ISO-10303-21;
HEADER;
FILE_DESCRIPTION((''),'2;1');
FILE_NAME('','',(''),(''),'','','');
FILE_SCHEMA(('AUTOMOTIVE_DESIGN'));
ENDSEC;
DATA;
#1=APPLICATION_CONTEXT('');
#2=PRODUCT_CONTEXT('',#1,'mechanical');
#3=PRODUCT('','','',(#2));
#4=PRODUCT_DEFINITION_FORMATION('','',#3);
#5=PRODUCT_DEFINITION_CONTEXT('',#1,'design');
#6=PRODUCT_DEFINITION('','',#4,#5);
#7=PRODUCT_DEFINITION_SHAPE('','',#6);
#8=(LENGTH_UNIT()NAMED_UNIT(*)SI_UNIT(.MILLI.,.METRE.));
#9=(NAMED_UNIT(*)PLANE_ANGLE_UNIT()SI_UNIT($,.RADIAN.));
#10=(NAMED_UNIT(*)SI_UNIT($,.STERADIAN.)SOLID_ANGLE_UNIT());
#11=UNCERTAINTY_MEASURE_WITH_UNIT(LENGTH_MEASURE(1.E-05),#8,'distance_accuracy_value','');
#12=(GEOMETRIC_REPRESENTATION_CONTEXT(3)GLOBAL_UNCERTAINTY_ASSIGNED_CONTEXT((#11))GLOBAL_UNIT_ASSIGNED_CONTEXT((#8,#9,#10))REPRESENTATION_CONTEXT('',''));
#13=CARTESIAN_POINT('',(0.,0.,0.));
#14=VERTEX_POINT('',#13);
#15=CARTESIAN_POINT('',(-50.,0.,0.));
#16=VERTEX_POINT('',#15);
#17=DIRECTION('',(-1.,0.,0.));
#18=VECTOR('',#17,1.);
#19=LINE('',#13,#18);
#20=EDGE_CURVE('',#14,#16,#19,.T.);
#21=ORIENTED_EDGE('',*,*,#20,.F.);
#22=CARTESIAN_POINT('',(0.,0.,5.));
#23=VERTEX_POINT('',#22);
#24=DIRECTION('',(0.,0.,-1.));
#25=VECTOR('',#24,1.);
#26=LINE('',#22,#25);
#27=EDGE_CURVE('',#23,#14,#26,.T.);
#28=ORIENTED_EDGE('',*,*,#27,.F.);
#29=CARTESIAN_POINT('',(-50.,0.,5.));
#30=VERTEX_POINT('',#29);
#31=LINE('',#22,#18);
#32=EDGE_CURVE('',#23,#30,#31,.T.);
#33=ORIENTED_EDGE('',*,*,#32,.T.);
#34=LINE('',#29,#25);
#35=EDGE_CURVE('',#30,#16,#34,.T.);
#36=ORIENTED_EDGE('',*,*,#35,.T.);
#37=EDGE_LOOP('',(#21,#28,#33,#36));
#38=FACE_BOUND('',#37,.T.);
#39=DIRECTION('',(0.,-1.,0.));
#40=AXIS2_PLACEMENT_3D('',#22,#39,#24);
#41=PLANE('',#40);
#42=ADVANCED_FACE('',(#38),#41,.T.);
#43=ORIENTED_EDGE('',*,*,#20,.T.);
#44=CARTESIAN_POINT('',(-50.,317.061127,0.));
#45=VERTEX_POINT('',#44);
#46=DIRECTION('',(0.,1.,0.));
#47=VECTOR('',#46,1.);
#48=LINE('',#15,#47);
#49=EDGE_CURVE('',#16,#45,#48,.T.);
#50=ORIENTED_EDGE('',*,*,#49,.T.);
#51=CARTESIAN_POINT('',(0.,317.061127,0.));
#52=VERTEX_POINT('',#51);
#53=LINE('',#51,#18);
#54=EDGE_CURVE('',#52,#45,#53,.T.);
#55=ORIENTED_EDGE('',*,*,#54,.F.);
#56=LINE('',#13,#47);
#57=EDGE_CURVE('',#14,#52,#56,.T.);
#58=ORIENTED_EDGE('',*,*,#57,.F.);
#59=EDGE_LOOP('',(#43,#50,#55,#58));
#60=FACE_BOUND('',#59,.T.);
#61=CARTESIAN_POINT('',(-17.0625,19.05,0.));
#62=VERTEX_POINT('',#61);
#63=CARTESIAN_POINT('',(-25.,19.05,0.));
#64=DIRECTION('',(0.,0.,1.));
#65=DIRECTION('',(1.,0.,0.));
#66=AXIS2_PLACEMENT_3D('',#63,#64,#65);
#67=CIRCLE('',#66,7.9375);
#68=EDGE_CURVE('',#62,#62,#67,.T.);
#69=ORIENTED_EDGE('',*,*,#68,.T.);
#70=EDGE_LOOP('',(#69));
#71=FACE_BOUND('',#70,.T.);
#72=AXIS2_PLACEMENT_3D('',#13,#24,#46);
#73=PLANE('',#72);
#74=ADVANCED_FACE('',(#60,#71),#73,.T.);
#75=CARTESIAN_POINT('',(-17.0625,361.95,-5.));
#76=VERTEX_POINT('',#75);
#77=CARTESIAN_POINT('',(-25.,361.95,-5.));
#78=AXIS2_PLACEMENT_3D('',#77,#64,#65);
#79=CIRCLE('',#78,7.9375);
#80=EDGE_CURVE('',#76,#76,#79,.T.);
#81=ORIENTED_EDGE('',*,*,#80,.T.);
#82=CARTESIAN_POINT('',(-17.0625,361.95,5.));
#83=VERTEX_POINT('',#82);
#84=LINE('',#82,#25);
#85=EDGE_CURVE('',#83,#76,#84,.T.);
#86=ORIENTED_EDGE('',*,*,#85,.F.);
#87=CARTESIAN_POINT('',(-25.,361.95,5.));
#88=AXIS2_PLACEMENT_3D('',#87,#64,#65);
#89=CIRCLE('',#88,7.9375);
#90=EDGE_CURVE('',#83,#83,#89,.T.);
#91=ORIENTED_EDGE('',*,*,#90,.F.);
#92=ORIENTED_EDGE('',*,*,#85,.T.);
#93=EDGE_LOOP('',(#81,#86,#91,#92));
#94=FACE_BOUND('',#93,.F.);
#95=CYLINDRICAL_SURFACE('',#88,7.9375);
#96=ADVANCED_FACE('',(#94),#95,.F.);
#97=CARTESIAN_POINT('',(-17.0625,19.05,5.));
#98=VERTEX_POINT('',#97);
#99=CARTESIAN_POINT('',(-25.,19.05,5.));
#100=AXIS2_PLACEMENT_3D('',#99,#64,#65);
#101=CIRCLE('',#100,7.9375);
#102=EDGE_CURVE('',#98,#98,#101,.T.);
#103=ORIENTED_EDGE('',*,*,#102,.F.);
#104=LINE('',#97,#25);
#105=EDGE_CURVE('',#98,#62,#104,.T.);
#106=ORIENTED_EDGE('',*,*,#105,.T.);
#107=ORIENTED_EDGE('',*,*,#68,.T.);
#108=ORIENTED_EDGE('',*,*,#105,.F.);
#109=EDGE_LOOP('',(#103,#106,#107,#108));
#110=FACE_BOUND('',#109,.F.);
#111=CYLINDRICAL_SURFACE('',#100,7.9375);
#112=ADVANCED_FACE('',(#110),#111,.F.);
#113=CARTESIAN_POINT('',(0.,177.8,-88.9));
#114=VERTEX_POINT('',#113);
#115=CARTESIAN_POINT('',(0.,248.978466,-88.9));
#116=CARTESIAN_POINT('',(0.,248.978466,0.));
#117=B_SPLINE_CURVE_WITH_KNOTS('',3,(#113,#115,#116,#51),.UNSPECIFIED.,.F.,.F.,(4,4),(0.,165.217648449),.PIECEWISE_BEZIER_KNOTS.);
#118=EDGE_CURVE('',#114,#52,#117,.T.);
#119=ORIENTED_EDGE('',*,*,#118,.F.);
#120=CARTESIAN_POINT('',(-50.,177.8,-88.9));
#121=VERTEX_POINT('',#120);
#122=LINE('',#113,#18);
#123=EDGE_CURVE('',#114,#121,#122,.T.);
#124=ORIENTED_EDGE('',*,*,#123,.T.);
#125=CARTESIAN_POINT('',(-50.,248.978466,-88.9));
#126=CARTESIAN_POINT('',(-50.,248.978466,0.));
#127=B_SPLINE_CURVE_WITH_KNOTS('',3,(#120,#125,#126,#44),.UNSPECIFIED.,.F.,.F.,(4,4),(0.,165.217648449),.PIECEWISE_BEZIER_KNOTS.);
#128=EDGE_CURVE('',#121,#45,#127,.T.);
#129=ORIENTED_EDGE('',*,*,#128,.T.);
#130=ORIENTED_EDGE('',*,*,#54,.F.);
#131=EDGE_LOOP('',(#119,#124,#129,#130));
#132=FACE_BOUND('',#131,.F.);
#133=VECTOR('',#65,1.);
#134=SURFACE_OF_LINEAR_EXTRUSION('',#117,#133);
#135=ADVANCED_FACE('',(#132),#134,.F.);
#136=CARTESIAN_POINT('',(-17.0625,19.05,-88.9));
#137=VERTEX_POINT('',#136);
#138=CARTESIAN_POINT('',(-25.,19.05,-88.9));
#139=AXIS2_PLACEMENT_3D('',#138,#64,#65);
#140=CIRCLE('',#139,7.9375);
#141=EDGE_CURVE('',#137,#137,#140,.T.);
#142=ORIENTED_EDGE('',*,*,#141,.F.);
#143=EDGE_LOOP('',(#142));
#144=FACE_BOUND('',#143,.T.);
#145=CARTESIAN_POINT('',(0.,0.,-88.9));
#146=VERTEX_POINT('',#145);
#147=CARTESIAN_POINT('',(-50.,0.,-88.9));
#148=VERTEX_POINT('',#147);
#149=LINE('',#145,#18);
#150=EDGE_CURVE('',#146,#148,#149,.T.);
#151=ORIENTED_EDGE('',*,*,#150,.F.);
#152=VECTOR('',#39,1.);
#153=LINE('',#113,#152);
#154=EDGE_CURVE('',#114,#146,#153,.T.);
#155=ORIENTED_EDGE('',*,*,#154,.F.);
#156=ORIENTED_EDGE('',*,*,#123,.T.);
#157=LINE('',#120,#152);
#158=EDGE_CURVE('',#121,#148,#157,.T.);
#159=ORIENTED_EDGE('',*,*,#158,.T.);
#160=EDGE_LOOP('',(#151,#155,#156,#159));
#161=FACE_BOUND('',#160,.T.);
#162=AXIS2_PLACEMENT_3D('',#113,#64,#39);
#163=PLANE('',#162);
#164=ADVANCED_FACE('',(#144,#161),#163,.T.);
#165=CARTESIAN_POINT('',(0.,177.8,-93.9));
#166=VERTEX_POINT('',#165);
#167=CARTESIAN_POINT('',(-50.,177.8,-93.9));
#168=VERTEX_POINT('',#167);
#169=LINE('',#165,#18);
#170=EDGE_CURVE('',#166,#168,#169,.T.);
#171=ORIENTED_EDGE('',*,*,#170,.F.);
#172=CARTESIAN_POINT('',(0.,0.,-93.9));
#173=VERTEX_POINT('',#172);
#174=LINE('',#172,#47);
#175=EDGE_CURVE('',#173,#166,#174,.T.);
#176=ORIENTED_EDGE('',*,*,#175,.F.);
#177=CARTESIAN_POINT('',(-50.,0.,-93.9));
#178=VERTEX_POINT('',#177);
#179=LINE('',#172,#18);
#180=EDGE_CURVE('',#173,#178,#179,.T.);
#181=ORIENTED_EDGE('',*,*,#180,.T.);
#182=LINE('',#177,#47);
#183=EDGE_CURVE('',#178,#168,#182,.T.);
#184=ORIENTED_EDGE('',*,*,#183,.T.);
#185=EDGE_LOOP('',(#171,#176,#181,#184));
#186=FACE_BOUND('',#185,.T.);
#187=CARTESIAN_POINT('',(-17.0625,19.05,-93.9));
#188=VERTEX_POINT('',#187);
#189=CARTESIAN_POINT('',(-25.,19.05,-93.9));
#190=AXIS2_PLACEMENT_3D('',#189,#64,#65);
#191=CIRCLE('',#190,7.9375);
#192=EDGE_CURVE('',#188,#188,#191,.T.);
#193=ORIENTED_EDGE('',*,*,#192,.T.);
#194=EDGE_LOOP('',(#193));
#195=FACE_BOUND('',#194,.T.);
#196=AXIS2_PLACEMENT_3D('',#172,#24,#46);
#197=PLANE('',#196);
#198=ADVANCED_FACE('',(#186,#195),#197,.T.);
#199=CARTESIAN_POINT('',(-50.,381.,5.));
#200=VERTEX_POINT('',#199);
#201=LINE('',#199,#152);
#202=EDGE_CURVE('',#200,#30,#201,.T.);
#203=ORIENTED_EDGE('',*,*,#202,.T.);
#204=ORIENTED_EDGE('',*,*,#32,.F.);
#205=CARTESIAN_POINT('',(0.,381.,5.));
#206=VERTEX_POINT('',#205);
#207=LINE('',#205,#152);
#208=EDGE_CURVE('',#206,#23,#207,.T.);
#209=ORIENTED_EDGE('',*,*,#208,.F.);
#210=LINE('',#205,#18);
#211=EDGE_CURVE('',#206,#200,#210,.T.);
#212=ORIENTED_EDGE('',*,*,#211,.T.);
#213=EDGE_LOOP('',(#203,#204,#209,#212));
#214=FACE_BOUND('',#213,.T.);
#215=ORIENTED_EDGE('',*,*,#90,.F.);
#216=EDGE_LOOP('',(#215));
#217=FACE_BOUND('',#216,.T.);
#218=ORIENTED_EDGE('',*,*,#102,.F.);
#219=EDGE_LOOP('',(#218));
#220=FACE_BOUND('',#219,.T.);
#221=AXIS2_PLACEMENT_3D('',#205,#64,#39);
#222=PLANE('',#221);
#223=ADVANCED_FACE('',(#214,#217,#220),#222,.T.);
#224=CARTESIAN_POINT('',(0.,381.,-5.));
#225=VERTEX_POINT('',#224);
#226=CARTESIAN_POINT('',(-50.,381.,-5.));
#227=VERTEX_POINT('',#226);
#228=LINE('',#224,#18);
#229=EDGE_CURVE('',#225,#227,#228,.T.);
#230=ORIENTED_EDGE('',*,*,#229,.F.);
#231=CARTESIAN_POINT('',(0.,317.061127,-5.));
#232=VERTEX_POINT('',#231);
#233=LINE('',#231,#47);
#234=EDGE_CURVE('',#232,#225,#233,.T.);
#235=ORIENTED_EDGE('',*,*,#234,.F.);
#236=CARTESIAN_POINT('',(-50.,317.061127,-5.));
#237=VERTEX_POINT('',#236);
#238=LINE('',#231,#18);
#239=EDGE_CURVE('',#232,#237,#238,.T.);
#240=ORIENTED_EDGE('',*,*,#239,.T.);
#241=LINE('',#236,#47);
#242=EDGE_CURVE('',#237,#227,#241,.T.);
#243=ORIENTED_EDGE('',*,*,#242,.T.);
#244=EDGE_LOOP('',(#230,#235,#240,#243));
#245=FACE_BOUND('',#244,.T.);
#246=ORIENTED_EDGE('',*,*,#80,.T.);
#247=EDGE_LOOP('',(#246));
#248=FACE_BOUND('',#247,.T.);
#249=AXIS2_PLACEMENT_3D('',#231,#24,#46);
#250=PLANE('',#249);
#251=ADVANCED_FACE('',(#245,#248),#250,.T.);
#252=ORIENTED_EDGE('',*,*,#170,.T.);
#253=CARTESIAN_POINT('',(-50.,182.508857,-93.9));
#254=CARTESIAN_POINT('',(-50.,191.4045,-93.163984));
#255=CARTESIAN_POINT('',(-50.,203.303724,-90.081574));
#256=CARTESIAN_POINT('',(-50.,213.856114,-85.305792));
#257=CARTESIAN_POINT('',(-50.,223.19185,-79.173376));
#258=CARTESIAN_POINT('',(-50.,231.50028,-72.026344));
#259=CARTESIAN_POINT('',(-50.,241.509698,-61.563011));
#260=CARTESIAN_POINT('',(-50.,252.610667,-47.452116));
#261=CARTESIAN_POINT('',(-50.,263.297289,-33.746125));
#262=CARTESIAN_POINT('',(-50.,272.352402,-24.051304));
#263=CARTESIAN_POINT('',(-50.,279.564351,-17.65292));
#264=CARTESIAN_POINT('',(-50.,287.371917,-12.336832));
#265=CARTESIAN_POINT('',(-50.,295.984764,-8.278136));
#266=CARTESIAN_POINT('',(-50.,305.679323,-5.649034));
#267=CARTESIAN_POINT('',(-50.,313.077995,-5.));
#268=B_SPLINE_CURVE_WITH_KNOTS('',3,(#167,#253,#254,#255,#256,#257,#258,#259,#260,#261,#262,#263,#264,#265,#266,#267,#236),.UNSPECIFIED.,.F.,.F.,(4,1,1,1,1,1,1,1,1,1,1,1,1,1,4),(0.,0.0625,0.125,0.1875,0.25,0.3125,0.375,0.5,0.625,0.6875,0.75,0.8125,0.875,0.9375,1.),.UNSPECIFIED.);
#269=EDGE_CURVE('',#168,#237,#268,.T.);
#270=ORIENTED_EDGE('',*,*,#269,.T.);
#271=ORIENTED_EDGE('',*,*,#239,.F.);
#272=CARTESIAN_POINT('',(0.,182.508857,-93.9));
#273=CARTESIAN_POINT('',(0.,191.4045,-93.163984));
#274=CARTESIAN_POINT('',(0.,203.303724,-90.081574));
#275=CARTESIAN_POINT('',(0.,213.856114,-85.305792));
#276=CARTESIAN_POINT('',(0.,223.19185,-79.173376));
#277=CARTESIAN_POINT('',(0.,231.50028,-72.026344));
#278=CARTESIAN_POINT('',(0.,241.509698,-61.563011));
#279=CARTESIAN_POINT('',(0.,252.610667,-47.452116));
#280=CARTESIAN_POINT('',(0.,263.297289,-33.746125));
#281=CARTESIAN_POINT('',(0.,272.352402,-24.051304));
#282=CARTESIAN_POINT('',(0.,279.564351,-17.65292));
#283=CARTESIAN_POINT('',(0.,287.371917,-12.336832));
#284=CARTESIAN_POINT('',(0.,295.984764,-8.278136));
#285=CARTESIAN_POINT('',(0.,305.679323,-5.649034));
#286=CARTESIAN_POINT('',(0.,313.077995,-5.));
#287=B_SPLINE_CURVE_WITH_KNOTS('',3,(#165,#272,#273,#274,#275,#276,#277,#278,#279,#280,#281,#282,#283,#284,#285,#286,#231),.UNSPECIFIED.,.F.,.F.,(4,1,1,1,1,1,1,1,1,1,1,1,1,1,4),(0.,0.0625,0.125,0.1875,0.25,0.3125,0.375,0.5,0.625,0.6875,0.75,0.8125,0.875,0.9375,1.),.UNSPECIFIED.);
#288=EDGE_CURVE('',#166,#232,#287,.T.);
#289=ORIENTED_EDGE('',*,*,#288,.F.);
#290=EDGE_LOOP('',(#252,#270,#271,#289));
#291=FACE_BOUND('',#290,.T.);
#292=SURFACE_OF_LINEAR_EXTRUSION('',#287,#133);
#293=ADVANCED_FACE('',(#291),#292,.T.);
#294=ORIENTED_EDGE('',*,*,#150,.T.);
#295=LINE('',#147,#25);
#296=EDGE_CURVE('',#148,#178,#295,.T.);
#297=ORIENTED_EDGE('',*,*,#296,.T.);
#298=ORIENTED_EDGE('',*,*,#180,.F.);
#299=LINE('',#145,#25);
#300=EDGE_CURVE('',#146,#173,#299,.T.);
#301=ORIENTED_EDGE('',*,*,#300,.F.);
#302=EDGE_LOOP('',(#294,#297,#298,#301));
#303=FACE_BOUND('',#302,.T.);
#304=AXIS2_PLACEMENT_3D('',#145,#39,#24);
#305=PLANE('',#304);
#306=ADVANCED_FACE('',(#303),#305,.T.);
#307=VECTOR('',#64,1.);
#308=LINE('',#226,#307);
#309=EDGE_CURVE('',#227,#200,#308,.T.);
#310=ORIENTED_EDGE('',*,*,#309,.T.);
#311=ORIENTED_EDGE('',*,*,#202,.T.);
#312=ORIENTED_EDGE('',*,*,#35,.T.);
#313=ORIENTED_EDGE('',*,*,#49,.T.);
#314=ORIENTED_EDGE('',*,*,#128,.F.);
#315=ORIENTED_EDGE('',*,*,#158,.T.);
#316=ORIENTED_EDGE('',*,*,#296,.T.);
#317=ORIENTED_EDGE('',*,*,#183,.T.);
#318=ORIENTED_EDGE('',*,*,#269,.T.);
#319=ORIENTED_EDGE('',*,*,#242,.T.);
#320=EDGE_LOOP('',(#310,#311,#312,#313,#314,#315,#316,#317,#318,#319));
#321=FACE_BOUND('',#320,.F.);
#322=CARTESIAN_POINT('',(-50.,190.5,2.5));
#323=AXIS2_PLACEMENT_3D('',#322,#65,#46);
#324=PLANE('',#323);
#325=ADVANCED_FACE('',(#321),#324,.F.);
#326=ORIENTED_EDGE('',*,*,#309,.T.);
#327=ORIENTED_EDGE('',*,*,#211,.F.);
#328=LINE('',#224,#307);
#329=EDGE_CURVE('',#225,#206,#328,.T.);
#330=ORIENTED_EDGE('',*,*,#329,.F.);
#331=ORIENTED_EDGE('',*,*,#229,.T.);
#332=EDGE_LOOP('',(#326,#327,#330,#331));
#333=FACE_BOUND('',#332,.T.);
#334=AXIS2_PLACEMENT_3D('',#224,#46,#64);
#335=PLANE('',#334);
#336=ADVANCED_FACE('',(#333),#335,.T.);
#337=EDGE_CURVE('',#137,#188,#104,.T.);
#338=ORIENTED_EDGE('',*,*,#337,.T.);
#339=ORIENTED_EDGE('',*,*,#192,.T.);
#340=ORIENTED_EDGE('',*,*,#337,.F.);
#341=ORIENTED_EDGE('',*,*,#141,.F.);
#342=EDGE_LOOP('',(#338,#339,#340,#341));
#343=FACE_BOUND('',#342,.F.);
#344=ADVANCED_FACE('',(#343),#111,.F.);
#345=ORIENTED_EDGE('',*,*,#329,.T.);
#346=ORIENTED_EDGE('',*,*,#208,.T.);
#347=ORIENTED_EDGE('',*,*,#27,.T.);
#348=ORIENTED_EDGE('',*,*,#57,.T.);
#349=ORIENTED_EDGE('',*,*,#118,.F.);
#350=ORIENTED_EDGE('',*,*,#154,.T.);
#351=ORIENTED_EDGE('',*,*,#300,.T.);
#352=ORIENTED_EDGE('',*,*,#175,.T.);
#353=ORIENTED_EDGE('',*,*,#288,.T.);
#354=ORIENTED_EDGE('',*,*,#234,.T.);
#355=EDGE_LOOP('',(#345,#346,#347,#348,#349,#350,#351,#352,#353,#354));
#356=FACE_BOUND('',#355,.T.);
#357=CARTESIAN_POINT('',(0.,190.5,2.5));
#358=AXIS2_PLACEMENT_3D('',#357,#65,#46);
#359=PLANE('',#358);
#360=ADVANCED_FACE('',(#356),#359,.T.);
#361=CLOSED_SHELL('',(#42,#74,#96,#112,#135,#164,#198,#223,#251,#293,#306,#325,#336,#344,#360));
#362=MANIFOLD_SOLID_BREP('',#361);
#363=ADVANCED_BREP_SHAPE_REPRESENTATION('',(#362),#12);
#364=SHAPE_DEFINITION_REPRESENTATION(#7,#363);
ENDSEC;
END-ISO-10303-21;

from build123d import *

# Parameters (mm, degrees)
F1_DEPTH = 50
F2_R     = 7.9375
F3_DEPTH = 98.9010001


# Not quite as in the source:
# - the dataset's text gives a spline's control points without its knots; the knots are read off the source's solid


with BuildPart() as f1:
    # F0 (on Right) → F1 (new body)
    with BuildSketch(Plane.YZ):
        Polygon((0, 5), (0, 0), (317.0611265182, 0), (381, 0), (381, 5), align=None)
        with BuildLine():
            Line((381, 0), (317.0611265182, 0))
            add(Edge.make_bspline(
                [(177.8, -88.9), (248.9784660816, -88.9), (248.9784660816, 0), (317.0611265182, 0)],
                knots=[0, 0, 0, 0, 165.2176484493, 165.2176484493, 165.2176484493, 165.2176484493], degree=3))
            Line((177.8, -88.9), (0, -88.9))
            Line((0, -88.9), (0, -93.9))
            Line((0, -93.9), (177.8, -93.9))
            add(Edge.make_bspline(
                [(177.8, -93.9), (182.5088568902, -93.9), (191.4045001846, -93.163983571), (203.303724493, -90.0815735434), (213.8561143205, -85.3057917839), (223.1918502865, -79.1733759879), (231.500279729, -72.0263439941), (241.5096982859, -61.5630106154), (252.6106670588, -47.4521159829), (263.297288811, -33.7461247303), (272.3524018342, -24.0513036385), (279.564351284, -17.6529202199), (287.3719173686, -12.3368323414), (295.9847641829, -8.2781357767), (305.6793231482, -5.6490337962), (313.0779947533, -5), (317.0611265182, -5)],
                knots=[0, 0, 0, 0, 0.0625, 0.125, 0.1875, 0.25, 0.3125, 0.375, 0.5, 0.625, 0.6875, 0.75, 0.8125, 0.875, 0.9375, 1, 1, 1, 1], degree=3))
            Line((317.0611265182, -5), (381, -5))
            Line((381, -5), (381, 0))
        make_face()
    extrude(amount=-F1_DEPTH)

    # F2 (on face) → F3 (cut, through all)
    with BuildSketch(Plane.XY.offset(5)):
        with Locations((-25, 361.95)):
            Circle(F2_R)
        with Locations((-25, 19.05)):
            Circle(F2_R)
    extrude(amount=-F3_DEPTH, mode=Mode.SUBTRACT)


solid = f1.part
